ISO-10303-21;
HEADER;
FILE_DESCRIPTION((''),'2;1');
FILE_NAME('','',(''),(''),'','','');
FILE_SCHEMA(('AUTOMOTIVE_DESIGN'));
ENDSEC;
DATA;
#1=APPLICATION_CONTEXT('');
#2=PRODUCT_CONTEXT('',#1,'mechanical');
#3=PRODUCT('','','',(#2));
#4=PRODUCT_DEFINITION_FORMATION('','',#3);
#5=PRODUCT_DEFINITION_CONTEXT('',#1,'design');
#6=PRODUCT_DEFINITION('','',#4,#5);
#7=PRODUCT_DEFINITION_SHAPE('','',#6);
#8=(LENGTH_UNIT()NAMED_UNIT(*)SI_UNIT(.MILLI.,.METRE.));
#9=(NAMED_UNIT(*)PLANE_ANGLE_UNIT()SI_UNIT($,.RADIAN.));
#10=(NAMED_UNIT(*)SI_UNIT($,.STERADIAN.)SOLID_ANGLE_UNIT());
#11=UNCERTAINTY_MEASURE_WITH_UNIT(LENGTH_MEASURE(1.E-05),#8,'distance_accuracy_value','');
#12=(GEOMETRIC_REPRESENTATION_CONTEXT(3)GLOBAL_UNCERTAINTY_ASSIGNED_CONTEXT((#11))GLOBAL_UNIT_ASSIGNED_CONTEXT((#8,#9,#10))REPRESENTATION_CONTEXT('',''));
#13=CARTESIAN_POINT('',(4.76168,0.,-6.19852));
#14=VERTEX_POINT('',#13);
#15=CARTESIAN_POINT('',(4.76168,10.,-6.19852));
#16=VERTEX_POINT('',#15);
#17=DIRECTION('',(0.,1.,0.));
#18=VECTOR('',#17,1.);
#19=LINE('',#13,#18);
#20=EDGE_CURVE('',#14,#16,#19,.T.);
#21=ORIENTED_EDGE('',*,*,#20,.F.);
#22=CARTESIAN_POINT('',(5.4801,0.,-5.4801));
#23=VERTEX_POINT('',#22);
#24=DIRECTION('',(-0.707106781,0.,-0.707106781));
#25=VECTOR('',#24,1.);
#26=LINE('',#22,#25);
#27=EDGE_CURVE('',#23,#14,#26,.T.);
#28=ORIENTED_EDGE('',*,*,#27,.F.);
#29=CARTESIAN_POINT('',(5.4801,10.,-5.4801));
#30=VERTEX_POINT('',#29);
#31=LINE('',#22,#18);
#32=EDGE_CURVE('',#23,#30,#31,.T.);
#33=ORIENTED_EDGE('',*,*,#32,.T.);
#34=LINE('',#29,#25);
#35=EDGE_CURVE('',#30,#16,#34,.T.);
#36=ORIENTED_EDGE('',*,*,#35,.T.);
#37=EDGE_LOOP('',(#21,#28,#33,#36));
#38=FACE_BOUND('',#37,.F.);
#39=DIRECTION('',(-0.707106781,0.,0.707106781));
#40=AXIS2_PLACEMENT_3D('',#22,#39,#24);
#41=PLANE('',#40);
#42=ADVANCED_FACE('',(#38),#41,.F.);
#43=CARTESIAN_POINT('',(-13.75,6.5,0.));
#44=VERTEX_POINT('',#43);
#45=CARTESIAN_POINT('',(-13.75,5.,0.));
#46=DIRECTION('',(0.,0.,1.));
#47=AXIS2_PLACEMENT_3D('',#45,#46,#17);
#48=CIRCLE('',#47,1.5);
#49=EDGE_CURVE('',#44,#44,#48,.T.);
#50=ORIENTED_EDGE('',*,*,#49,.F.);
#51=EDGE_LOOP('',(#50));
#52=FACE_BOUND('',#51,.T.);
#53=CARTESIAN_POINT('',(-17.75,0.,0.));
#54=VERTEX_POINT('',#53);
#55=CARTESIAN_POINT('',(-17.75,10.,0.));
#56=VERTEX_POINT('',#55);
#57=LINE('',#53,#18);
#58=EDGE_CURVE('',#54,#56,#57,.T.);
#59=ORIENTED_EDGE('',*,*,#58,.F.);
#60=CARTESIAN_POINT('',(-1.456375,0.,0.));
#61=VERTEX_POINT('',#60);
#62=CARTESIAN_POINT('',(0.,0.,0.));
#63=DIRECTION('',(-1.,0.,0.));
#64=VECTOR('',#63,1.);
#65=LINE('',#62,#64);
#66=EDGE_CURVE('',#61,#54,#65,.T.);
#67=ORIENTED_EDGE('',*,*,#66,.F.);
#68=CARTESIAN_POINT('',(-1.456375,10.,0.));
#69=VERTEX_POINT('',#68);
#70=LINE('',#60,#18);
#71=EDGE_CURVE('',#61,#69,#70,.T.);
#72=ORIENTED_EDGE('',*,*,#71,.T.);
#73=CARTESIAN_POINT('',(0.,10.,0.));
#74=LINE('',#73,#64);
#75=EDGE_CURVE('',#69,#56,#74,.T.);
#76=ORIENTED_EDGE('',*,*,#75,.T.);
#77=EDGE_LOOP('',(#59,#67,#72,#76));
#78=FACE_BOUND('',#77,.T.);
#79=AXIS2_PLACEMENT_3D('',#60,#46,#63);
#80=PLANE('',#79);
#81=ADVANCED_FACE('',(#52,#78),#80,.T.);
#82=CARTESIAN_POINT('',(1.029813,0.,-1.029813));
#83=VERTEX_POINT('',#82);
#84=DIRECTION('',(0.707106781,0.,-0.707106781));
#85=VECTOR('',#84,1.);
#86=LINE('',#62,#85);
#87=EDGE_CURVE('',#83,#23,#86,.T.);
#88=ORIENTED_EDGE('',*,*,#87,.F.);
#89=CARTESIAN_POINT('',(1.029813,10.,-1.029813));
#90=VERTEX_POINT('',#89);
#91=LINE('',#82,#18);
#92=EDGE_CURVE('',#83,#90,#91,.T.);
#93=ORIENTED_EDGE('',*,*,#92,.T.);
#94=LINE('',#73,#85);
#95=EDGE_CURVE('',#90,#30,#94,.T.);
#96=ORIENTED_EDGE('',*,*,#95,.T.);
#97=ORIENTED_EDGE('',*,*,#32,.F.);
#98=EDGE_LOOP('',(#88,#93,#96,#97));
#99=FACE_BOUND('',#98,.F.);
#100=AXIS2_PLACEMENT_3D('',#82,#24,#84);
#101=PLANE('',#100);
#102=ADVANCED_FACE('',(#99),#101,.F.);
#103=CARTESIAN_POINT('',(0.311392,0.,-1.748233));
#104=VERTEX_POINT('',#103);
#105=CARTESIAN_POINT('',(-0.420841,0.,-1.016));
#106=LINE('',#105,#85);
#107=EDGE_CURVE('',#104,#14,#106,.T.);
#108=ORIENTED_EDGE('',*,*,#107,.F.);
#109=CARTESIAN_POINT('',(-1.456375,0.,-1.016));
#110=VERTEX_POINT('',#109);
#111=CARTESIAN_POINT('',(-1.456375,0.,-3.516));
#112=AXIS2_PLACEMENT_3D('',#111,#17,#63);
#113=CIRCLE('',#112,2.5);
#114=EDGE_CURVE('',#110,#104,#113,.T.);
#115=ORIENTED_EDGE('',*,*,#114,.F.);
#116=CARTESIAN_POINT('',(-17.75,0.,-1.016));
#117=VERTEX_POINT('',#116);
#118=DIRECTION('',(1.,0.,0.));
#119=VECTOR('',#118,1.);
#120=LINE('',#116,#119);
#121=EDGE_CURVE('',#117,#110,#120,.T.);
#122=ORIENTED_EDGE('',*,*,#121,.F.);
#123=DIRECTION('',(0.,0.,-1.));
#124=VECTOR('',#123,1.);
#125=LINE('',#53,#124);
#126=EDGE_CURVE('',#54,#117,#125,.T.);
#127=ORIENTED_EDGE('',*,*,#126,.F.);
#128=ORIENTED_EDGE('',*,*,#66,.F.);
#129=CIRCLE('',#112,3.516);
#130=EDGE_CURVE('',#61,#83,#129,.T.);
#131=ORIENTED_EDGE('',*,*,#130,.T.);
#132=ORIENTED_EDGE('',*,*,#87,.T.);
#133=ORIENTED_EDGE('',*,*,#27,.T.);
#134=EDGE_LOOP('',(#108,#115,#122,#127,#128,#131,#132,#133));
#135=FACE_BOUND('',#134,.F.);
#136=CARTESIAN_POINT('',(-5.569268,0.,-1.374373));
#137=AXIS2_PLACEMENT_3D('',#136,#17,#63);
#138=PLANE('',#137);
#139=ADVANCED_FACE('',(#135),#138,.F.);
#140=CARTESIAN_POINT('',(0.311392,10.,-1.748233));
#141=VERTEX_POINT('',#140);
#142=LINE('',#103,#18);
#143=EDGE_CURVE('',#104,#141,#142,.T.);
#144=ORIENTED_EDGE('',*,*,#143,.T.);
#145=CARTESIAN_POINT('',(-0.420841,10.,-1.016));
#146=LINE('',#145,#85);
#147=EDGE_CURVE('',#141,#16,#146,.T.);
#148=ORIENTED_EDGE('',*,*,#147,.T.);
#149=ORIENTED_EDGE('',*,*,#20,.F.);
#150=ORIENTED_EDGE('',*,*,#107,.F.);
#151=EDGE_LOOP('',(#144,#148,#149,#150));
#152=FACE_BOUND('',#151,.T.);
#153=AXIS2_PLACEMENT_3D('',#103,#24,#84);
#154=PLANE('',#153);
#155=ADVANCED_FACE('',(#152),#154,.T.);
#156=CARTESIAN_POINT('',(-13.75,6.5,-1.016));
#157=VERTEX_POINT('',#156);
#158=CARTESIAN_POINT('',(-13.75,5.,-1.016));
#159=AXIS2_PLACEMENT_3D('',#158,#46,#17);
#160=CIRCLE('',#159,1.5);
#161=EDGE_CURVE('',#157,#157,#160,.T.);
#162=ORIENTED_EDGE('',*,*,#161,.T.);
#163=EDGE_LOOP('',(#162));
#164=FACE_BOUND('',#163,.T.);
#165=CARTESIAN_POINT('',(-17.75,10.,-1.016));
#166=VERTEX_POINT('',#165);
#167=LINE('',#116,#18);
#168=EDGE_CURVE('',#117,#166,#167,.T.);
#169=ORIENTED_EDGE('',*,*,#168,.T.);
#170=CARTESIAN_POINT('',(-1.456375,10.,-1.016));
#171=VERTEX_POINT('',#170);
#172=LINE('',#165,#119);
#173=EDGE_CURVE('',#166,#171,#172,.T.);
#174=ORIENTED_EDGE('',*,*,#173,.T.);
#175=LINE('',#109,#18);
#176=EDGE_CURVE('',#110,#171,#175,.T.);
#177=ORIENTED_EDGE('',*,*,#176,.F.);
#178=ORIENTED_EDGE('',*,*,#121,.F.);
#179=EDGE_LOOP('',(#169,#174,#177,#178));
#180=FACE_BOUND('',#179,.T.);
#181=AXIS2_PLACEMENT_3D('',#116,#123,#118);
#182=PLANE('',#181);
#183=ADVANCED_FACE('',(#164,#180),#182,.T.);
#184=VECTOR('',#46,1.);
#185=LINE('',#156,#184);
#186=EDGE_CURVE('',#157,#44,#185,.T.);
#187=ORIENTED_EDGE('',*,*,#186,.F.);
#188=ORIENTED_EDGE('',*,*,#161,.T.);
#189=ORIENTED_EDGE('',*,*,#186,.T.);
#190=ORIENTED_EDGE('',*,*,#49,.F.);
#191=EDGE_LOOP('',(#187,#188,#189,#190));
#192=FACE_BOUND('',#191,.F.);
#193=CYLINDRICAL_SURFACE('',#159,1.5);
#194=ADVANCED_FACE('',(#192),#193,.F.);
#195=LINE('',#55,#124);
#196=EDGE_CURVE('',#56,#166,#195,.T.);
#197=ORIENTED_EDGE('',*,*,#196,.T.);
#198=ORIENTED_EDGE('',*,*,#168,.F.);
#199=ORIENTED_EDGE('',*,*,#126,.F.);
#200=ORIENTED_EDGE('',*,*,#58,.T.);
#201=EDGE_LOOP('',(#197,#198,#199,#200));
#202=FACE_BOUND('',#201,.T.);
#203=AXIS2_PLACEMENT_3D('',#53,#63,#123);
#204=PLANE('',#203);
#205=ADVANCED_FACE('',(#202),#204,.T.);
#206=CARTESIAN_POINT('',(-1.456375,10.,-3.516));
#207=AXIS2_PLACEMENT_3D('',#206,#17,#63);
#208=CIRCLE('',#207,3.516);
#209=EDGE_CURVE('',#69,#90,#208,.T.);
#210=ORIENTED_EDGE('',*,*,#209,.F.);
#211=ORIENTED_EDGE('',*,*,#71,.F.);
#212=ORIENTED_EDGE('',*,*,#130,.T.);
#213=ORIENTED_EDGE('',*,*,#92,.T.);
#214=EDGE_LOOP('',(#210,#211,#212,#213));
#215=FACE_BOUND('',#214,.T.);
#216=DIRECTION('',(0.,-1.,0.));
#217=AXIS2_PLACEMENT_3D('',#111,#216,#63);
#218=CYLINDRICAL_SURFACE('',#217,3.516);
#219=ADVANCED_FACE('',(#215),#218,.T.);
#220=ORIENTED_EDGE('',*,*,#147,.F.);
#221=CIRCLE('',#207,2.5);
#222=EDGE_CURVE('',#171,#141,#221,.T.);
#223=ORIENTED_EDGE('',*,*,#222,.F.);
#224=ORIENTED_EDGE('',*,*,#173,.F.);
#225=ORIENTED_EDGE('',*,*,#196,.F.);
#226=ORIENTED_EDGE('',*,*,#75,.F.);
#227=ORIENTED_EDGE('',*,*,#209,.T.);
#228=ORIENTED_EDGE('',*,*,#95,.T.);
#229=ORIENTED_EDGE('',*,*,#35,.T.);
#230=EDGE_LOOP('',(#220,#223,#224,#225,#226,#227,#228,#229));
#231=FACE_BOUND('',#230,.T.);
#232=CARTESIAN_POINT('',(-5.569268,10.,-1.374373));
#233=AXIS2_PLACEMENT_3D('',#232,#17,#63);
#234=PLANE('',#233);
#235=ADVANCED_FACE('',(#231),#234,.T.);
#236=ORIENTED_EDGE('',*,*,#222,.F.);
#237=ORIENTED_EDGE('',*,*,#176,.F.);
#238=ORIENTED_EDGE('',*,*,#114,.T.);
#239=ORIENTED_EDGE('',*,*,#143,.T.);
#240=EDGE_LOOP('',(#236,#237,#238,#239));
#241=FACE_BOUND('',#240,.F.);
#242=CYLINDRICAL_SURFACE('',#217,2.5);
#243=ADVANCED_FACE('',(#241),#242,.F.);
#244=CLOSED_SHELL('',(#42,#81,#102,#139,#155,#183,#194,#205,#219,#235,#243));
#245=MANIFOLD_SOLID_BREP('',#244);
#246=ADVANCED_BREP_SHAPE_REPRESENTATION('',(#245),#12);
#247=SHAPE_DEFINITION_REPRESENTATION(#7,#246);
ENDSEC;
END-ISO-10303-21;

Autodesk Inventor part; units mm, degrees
ref_plane "YZ Plane" through (0, 0, 0) normal (1, 0, 0) x (0, 1, 0)
ref_plane "XZ Plane" through (0, 0, 0) normal (0, 1, 0) x (-1, 0, 0)
ref_plane "XY Plane" through (0, 0, 0) normal (0, 0, 1) x (1, 0, 0)
sketch "Sketch1" plane through (0, 0, 0) normal (0, 1, 0) x (-1, 0, 0)
  line L0 (0, 0) -> (-5.4801, -5.4801)
  line L1 (0, 0) -> (17.75, 0)
  dimension "d0" = 7.75
  dimension "d2" = 17.75
  dimension "d3" = 135
contour flange "Contour Flange1" sketch "Sketch1" thickness 1.016 bend radius 2.5 width 10 along (0, 1, 0) mid plane no both sides no wall seen from (2.74, 0, -2.74) lies toward (-0.7071068, 0, -0.7071068) curves L0 L1
bend "Bend1"
corner "Corner1"
sketch "Sketch2" plane through (-17.75, 0, -1.016) normal (0, 0, -1) x (-1, 0, 0)
  point P0 (-17.75, 0)
  point P1 (0, 0)
  point P2 (-4, 5)
  dimension "d15" = 5
  dimension "d16" = 4
hole "Hole1" at (-13.75, 5, -1.016) direction (0, 0, 1) diameter 3 end through all
equation "\"d22\" = Thickness"
equation "\"d4\" = Thickness"
equation "\"d5\" = BendReliefWidth"
equation "\"d6\" = BendReliefDepth"
equation "\"d7\" = MinimumRemnant"
equation "\"d8\" = TransitionRadius"
equation "\"d12\" = CornerReliefSize"
equation "\"d13\" = GapSize"
equation "\"d14\" = JacobiRadiusSize"
equation "\"BendRadius\" = Thickness"
equation "\"BendReliefWidth\" = Thickness"
equation "\"BendReliefDepth\" = 0.5 * Thickness"
equation "\"CornerReliefSize\" = 4 * Thickness"
equation "\"MinimumRemnant\" = 2 * Thickness"
equation "\"TransitionRadius\" = BendRadius"
equation "\"JacobiRadiusSize\" = BendRadius"
equation "\"GapSize\" = Thickness"
equation "\"Thickness\" = 1.016"
properties part number "Piston Flag" material "Nylon 6/6"
